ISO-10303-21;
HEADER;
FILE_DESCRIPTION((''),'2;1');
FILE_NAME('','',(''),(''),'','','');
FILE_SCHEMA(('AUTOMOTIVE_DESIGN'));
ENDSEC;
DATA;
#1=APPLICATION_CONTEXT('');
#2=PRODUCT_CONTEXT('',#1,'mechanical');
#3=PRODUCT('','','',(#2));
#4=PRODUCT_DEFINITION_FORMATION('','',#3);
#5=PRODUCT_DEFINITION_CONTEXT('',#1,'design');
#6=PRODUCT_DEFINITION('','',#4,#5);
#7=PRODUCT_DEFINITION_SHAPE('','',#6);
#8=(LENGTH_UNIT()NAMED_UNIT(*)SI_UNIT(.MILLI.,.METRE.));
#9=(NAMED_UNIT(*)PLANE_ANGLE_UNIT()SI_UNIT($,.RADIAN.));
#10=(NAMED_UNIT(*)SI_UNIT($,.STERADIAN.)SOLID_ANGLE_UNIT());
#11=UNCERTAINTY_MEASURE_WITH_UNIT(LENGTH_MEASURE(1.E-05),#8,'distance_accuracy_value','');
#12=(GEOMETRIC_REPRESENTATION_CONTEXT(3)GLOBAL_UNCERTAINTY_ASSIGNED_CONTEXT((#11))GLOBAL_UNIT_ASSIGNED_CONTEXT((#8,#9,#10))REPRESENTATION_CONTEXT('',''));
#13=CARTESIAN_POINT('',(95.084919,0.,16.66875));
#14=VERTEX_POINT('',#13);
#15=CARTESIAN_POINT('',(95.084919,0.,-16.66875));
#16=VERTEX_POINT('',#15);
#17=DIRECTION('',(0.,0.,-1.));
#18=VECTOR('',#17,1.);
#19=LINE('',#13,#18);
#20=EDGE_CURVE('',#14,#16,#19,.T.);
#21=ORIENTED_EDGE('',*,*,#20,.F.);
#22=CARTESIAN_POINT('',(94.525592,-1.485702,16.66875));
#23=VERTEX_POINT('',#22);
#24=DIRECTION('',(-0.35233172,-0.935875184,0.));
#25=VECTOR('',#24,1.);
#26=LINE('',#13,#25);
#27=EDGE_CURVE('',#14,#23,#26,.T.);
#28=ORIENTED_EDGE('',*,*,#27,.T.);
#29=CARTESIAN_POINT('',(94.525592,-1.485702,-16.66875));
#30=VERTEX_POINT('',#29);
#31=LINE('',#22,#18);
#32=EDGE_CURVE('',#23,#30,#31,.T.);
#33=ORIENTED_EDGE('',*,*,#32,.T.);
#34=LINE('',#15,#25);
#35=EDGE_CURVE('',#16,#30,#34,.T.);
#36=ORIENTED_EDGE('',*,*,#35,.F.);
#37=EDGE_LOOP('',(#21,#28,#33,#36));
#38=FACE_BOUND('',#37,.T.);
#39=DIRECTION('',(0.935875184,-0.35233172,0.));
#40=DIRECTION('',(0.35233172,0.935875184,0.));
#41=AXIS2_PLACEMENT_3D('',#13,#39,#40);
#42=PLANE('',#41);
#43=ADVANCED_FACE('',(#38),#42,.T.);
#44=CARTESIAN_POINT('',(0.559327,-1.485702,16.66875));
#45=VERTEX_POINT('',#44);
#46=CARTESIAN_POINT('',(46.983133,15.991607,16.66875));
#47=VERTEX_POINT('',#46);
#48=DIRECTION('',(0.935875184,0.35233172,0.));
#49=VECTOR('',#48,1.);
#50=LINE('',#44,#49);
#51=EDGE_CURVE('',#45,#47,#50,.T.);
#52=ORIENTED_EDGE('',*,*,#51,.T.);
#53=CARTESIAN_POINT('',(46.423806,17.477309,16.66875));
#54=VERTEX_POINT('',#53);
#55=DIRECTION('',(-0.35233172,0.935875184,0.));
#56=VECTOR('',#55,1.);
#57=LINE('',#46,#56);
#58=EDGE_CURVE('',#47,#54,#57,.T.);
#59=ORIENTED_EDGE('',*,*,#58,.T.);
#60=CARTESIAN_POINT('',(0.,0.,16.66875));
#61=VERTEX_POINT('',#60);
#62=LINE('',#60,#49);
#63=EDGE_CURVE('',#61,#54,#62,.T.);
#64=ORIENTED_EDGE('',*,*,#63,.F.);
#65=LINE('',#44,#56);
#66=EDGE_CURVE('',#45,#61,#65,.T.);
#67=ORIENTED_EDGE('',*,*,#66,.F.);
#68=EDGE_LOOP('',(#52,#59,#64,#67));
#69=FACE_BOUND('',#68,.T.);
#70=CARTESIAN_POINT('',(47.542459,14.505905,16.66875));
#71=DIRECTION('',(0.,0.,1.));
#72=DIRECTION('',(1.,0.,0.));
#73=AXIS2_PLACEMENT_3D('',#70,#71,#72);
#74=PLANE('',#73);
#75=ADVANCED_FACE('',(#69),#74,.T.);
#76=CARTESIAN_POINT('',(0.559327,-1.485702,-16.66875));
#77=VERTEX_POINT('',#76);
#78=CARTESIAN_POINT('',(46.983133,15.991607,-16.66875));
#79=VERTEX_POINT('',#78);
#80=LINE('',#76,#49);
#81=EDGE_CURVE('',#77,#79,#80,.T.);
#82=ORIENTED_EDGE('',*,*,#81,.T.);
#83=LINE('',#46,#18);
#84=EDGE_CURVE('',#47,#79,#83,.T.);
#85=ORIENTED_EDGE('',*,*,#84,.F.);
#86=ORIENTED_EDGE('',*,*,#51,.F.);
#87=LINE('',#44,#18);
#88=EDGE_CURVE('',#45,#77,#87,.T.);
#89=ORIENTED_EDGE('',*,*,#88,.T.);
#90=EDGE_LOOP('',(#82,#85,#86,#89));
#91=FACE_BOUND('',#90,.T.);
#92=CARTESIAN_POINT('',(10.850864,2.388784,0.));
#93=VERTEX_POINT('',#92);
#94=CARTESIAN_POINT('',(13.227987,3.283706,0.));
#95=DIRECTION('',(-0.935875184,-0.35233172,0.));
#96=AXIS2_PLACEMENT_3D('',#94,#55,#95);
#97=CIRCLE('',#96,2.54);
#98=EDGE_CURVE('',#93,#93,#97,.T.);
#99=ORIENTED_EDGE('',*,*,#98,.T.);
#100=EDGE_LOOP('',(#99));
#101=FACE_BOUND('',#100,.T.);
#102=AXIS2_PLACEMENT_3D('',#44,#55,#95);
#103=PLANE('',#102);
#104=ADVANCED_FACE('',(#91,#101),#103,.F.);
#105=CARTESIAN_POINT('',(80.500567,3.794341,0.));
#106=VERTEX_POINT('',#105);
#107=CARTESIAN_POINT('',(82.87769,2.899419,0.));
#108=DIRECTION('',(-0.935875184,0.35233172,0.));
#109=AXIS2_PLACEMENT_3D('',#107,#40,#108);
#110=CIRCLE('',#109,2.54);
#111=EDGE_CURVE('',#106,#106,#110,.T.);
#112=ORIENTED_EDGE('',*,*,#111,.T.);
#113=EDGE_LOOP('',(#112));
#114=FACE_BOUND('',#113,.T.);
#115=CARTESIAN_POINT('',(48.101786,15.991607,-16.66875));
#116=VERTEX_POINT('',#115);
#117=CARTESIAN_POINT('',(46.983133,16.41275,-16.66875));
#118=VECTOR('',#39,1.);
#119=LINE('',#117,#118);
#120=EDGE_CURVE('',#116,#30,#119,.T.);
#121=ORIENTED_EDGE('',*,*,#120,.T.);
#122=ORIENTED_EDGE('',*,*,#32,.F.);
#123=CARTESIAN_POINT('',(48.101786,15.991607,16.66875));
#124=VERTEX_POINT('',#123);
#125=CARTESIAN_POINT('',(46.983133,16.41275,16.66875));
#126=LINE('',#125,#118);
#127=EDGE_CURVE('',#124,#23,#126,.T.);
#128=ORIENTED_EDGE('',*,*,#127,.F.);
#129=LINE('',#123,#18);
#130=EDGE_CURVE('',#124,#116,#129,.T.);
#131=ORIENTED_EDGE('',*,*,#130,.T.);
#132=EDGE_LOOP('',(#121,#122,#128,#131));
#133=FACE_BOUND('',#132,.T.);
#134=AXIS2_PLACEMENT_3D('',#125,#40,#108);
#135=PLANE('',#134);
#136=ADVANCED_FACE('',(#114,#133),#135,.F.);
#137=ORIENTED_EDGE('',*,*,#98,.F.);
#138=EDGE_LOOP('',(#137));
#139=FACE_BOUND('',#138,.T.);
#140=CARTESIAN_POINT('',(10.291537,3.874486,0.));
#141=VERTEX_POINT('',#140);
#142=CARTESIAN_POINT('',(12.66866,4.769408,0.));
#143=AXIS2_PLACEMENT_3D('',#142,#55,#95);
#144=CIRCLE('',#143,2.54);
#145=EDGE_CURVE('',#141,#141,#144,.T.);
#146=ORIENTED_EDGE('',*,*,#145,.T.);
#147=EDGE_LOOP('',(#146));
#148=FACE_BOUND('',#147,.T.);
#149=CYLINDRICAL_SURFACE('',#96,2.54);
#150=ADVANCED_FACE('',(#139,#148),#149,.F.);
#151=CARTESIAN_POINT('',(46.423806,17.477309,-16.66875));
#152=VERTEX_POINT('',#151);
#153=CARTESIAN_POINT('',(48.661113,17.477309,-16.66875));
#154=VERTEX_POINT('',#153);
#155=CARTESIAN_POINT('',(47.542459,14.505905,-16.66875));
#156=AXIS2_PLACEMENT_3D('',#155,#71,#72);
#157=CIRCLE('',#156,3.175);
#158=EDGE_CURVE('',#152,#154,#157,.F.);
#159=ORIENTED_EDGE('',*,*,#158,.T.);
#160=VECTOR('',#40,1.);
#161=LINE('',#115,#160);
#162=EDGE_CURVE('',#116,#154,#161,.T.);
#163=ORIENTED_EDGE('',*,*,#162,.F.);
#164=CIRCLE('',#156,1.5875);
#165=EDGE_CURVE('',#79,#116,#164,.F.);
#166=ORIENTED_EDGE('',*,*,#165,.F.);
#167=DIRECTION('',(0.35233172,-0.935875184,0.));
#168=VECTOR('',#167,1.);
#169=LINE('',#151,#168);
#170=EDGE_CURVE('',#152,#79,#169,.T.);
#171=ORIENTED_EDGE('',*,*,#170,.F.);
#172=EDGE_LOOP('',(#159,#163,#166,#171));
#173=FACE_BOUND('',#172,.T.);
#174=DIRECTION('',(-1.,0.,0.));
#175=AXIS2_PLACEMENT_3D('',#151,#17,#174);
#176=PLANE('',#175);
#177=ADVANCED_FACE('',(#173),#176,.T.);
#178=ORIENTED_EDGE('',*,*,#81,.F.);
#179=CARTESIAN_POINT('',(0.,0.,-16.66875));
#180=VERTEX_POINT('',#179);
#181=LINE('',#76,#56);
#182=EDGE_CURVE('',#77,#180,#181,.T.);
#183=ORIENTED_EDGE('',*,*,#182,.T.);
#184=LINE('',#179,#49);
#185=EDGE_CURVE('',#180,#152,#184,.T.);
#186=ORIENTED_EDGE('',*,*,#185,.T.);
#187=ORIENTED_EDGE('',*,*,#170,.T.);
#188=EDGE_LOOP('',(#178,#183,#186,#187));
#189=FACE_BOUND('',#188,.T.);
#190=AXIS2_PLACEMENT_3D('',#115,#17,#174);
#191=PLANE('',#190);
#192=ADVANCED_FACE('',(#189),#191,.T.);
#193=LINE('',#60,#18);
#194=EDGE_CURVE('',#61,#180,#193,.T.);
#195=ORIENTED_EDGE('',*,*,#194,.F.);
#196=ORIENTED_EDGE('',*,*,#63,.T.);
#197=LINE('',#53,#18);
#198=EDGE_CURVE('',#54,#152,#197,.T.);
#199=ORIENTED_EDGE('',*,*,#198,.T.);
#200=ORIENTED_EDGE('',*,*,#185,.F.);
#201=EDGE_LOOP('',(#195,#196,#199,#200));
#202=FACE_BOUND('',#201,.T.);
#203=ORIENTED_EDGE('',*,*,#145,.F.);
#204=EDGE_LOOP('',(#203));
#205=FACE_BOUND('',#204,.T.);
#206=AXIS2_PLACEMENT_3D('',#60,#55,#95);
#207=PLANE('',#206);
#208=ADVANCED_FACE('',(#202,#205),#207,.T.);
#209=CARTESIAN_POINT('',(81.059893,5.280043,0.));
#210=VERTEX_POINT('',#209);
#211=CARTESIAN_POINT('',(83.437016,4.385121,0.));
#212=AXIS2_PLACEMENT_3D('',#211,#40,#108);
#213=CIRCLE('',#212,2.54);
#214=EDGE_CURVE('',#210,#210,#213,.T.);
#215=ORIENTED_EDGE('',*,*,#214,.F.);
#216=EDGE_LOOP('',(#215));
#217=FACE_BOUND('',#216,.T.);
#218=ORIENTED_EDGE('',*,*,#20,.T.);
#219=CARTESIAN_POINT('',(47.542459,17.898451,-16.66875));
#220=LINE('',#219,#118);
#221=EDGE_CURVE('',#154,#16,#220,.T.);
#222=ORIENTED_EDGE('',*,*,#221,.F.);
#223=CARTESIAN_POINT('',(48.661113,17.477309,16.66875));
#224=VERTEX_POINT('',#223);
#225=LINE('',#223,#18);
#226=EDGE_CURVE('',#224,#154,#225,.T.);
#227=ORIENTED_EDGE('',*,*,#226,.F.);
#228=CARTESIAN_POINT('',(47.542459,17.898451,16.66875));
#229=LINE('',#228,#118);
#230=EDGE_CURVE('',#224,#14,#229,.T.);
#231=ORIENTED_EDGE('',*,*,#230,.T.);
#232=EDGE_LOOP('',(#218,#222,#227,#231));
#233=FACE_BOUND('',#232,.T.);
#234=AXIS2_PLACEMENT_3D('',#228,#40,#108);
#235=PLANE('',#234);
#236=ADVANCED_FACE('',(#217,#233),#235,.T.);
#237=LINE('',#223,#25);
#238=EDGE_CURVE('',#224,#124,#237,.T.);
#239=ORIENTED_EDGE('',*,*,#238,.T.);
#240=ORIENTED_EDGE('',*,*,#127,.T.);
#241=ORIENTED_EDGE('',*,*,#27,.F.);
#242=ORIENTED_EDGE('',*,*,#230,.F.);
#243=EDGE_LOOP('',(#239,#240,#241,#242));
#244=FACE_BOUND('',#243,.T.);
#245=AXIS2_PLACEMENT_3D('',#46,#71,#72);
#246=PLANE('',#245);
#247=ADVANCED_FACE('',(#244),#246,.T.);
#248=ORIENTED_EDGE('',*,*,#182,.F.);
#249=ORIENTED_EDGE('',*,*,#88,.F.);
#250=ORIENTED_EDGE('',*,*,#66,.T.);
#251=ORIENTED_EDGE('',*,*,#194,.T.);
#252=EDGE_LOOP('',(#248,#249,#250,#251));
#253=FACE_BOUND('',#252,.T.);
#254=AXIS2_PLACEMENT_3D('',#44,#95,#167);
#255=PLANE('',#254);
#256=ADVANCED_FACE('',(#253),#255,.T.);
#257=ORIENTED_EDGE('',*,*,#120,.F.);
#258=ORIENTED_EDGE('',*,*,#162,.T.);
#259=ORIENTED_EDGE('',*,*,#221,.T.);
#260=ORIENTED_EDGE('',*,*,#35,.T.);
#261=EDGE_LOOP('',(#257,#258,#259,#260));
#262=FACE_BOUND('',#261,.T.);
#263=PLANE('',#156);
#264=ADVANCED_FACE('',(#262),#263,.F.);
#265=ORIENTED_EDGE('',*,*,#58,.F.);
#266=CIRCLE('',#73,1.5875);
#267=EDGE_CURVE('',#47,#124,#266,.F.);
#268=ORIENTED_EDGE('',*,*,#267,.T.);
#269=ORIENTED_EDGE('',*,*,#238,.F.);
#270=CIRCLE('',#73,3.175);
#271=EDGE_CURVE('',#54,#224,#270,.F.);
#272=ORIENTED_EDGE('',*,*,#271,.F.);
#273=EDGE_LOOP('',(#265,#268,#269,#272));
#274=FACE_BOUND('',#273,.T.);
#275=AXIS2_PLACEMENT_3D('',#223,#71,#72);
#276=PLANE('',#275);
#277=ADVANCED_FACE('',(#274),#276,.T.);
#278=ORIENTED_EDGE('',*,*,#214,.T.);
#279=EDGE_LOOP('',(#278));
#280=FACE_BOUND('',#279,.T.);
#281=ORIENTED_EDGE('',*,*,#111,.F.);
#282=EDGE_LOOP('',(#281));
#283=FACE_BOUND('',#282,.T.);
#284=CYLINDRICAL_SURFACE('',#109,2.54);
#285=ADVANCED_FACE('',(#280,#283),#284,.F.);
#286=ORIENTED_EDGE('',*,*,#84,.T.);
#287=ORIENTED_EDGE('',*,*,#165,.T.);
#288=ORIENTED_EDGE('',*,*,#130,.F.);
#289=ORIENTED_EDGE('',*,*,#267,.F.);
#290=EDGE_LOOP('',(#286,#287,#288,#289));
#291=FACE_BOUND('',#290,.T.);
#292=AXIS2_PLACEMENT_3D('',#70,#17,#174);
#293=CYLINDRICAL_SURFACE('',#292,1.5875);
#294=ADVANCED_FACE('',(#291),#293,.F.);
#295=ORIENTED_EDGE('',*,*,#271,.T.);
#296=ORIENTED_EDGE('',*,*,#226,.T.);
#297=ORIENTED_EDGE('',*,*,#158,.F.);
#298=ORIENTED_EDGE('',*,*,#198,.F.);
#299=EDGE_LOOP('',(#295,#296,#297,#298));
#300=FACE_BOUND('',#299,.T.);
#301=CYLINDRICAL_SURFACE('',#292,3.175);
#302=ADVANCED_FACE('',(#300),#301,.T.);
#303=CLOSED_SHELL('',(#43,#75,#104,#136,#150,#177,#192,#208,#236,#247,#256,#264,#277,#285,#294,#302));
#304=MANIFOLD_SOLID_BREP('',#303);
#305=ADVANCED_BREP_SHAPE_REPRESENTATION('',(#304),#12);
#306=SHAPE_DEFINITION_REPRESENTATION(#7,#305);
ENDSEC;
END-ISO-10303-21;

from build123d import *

# Parameters (mm, degrees)
BASE_FLANGE1_DEPTH = 16.66875
SKETCH2_R          = 2.54
CUT_EXTRUDE1_DEPTH = 2.54
SKETCH3_R          = 2.54
CUT_EXTRUDE2_DEPTH = 1.5875


# Sheet-metal steps are written as plain solids
with BuildPart() as part:
    # Sketch1 → Base-Flange1 (new, symmetric)
    with BuildSketch(Plane.XY):
        with BuildLine():
            Line((0, 0), (46.423806115, 17.477308657))
            ThreePointArc((46.423806115, 17.477308657), (47.542459326, 17.680904949), (48.661112536, 17.477308657))
            Line((48.661112536, 17.477308657), (95.084918652, 0))
            Line((95.084918652, 0), (94.525592046, -1.485701854))
            Line((94.525592046, -1.485701854), (48.101785931, 15.991606803))
            ThreePointArc((48.101785931, 15.991606803), (47.542459326, 16.093404949), (46.983132721, 15.991606803))
            Line((46.983132721, 15.991606803), (0.559326605, -1.485701854))
            Line((0.559326605, -1.485701854), (0, 0))
        make_face()
    extrude(amount=BASE_FLANGE1_DEPTH, both=True)

    # Sketch2 → Cut-Extrude1 (cut)
    with BuildSketch(Plane(origin=(0, 0, 0), x_dir=(0.9358751835780662, 0.3523317197794163, 0), z_dir=(-0.3523317197794163, 0.9358751835780662, 0))):
        with Locations(Location((13.536698287, 0, 0), (0, 0, 180))):
            Circle(SKETCH2_R)
    extrude(amount=-CUT_EXTRUDE1_DEPTH, mode=Mode.SUBTRACT)

    # Sketch3 → Cut-Extrude2 (cut)
    with BuildSketch(Plane(origin=(11.803617474, 31.353159678, 0), x_dir=(0.9358751835780662, -0.3523317197794163, 0), z_dir=(0.3523317197794163, 0.9358751835780662, 0))):
        with Locations(Location((76.541615699, 0, 0), (0, 0, 180))):
            Circle(SKETCH3_R)
    extrude(amount=-CUT_EXTRUDE2_DEPTH, mode=Mode.SUBTRACT)


solid = part.part
